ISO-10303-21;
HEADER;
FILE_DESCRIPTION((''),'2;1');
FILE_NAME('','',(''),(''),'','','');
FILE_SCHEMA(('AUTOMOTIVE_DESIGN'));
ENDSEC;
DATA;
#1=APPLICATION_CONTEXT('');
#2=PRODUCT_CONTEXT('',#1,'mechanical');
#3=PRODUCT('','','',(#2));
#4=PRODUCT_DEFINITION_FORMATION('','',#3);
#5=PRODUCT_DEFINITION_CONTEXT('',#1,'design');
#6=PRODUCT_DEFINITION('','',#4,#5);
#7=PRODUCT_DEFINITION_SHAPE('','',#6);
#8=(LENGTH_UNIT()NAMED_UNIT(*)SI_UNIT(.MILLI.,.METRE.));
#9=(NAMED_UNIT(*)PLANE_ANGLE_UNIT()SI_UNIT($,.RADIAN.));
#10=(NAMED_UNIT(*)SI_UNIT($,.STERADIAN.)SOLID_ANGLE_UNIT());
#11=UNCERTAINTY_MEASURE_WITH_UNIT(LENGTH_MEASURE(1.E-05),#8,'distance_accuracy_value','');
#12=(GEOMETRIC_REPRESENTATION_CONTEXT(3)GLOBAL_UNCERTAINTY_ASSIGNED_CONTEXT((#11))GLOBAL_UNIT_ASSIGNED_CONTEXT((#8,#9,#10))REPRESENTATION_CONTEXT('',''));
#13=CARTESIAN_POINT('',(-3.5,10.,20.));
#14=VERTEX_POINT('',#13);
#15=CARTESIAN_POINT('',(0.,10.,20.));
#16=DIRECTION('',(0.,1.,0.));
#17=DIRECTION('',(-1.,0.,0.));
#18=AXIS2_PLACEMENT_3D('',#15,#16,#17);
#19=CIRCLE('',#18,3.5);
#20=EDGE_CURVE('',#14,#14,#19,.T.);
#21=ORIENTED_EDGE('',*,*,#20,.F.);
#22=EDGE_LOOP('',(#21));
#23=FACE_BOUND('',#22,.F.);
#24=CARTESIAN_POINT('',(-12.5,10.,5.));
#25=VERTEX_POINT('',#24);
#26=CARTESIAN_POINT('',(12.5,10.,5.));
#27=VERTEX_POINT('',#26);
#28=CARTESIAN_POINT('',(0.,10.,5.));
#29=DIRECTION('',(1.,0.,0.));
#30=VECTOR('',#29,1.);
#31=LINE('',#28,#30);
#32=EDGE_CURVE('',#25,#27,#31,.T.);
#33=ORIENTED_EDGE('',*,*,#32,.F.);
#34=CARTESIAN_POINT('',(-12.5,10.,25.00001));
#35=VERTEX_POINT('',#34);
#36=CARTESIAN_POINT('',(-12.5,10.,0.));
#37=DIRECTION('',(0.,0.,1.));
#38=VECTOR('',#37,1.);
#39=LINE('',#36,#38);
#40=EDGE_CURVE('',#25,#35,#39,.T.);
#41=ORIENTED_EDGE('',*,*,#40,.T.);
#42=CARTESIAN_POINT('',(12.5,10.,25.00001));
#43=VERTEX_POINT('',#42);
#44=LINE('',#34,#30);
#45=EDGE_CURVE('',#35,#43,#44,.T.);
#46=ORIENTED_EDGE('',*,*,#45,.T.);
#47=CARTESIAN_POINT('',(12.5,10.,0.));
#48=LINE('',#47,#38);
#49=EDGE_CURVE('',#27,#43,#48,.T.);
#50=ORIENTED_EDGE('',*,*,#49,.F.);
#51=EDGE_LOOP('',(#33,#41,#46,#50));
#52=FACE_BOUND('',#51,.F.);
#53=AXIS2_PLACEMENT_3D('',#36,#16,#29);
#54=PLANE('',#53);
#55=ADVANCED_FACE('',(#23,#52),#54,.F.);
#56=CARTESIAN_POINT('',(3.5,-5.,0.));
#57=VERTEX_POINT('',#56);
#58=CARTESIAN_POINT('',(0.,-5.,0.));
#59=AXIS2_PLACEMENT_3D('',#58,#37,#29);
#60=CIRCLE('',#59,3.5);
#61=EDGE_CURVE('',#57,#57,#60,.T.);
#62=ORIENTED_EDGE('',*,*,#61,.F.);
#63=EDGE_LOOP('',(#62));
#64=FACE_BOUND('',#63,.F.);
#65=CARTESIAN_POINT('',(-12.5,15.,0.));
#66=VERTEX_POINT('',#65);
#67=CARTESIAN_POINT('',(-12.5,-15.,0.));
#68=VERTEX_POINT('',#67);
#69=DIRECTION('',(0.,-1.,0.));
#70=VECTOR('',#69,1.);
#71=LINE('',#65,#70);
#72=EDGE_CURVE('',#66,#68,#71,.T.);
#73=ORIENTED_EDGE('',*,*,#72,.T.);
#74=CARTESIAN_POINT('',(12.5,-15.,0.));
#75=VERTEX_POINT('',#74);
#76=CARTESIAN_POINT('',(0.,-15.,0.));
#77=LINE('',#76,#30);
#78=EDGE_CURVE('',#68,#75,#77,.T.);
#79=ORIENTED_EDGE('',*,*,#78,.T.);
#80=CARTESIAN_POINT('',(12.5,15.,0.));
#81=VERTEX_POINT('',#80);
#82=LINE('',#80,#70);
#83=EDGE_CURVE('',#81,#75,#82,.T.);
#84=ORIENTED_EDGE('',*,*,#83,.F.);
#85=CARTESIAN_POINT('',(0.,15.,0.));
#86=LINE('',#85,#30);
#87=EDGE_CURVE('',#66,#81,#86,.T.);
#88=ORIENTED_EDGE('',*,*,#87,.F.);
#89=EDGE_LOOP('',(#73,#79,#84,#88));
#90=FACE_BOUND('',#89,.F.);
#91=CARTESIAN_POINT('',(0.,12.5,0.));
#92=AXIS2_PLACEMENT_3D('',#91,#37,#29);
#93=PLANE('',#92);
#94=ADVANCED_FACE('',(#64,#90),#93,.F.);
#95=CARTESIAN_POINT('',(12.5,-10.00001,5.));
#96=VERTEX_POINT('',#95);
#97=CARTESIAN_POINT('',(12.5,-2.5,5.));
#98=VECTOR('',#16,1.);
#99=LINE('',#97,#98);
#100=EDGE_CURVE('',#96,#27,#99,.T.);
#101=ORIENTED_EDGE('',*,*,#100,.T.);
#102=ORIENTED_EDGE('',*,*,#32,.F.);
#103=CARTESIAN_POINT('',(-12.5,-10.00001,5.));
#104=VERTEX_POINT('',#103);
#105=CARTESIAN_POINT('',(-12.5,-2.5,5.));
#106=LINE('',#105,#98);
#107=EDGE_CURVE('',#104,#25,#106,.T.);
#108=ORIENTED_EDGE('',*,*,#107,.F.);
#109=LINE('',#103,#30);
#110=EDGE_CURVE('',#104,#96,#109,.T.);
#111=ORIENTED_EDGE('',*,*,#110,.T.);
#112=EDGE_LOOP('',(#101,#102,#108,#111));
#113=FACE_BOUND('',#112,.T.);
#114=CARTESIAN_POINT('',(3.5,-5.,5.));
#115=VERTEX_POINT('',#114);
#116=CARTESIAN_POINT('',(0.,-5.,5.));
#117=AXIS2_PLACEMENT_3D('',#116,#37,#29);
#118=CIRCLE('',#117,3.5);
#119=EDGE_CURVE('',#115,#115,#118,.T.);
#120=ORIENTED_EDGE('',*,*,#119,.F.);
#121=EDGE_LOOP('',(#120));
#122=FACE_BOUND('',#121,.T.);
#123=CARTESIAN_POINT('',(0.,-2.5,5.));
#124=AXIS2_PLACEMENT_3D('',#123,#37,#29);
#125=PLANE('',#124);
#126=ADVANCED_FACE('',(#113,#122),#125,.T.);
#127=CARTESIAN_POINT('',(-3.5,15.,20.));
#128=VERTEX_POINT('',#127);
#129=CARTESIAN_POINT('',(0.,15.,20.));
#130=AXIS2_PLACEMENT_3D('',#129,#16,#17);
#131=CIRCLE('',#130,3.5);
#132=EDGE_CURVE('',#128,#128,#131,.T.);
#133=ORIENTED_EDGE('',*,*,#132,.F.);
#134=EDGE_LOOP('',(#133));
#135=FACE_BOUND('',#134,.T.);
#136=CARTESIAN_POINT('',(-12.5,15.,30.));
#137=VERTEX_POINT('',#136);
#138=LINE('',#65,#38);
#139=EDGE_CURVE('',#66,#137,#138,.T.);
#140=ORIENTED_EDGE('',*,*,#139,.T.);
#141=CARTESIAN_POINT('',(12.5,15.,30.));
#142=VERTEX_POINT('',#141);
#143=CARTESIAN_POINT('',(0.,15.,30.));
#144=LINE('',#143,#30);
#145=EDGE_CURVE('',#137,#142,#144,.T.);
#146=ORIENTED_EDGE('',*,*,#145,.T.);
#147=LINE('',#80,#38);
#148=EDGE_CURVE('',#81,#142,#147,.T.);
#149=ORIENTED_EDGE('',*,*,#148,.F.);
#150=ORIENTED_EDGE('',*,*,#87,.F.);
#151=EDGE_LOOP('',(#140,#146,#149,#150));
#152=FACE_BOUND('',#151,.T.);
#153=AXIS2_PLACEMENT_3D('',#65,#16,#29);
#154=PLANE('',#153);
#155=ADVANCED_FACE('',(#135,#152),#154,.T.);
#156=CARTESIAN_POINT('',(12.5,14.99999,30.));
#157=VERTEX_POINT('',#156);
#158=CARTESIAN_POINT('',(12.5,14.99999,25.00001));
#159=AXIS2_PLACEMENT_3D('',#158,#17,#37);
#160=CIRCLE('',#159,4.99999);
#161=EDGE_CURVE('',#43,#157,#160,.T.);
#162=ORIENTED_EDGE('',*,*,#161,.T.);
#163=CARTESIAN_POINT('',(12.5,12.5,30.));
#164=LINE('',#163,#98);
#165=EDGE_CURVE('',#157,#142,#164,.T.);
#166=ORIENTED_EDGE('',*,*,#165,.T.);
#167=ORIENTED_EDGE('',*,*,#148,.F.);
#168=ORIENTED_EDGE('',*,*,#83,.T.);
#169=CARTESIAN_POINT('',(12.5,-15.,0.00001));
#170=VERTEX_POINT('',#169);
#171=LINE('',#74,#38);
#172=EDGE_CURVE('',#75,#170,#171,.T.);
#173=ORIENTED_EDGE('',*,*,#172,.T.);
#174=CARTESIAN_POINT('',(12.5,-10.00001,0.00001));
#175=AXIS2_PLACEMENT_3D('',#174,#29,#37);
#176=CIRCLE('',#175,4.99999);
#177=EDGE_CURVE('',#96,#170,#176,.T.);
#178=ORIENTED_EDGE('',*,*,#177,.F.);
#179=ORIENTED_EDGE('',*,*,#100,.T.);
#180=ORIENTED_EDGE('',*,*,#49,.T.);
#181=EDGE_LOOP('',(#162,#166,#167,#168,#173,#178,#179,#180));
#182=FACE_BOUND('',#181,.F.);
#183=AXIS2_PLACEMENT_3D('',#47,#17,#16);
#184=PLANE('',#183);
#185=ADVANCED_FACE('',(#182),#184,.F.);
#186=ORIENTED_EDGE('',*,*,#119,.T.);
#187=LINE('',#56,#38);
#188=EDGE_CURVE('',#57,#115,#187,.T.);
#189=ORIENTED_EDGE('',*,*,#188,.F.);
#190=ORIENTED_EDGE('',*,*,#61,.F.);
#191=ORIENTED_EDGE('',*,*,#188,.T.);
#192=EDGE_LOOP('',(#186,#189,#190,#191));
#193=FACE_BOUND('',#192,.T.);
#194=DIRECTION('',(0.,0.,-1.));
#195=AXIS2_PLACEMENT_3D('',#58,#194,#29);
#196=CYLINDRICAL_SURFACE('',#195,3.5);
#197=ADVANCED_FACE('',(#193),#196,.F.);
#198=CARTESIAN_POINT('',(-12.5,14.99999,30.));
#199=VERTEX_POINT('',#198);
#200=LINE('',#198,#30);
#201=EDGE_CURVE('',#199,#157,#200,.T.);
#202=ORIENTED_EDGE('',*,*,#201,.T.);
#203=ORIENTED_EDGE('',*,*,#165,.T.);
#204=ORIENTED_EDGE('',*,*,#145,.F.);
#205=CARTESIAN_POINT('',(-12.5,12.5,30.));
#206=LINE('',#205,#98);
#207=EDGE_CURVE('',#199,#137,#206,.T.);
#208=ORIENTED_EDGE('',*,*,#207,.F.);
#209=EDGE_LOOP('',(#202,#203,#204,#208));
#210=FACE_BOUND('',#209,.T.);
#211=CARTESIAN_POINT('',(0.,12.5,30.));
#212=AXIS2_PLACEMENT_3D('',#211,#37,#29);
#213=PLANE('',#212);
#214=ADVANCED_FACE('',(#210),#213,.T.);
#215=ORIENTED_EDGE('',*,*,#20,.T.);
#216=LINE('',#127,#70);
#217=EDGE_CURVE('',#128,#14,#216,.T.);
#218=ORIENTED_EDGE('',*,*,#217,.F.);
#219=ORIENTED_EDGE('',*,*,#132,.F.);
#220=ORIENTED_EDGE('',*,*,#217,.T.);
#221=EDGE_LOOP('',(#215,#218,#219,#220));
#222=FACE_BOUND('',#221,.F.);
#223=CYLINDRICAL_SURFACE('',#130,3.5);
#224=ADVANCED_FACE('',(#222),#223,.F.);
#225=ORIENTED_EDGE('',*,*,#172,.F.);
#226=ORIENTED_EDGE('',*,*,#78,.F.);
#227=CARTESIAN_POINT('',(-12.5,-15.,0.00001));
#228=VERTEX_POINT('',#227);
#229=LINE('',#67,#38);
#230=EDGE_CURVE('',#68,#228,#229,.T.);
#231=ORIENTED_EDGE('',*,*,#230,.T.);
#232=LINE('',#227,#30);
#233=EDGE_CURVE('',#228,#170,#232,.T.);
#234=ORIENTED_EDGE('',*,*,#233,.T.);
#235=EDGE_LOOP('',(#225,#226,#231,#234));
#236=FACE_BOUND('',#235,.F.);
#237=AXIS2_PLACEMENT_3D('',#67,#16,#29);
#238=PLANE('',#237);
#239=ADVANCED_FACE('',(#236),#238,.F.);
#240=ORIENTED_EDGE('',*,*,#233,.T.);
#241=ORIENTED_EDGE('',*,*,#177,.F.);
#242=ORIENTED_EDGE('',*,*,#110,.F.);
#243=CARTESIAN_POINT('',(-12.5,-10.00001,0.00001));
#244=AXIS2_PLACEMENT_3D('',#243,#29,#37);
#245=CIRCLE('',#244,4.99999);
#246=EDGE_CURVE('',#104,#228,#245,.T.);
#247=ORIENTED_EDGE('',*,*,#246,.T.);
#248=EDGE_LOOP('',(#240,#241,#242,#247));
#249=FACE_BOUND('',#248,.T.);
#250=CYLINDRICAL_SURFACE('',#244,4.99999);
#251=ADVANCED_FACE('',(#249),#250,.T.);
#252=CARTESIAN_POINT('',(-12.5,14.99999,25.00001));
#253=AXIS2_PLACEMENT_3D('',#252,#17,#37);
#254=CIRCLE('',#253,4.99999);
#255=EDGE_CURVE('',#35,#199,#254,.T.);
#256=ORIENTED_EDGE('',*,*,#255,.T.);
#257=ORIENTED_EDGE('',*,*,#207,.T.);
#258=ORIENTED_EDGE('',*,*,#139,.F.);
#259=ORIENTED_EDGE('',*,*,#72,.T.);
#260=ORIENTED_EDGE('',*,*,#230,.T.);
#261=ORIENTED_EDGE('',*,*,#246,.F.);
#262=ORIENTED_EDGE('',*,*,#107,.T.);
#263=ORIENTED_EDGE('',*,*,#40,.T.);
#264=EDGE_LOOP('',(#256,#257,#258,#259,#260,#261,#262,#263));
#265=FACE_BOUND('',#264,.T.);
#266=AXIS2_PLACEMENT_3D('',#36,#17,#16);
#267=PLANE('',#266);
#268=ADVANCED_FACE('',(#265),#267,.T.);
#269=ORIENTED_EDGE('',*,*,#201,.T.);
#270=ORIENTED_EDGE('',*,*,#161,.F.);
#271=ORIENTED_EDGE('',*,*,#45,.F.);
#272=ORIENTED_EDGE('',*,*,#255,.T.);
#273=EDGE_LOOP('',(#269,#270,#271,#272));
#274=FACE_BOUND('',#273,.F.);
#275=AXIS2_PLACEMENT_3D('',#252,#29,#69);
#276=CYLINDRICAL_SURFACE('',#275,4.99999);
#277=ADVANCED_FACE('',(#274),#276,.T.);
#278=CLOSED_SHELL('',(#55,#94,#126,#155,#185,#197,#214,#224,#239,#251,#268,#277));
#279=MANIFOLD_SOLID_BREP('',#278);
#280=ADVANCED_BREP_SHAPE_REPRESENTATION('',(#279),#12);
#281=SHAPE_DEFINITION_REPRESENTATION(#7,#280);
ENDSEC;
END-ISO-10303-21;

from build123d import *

# Parameters (mm, degrees)
F0_W     = 25
F0_H     = 25
F0_R     = 3.5
F1_DEPTH = 5
F0_H_2   = 5
F2_DEPTH = 30
F3_R     = 3.5
F4_DEPTH = 5
F5_R     = 4.99999
F6_R     = 4.99999


# Not quite as in the source:
# - a fillet or chamfer is up to 0.001 mm smaller than in the source, because OpenCascade refuses the exact size


with BuildPart() as f1:
    # F0 (on Top) → F1 (new body)
    with BuildSketch(Plane.XY):
        with Locations((0, -2.5)):
            Rectangle(F0_W, F0_H)
        with Locations((0, -5)):
            Circle(F0_R, mode=Mode.SUBTRACT)
    extrude(amount=F1_DEPTH)

    # F0 (on Top) → F2 (join)
    with BuildSketch(Plane.XY):
        with Locations((0, 12.5)):
            Rectangle(F0_W, F0_H_2)
    extrude(amount=F2_DEPTH)

    # F3 (on face) → F4 (cut)
    with BuildSketch(Plane(origin=(0, 15, 0), x_dir=(-1, 0, 0), z_dir=(0, 1, 0))):
        with Locations((0, 20)):
            Circle(F3_R)
    extrude(amount=-F4_DEPTH, mode=Mode.SUBTRACT)

    # F5 (radius 5 in the source; OpenCascade refuses exactly that, so slightly less here)
    f5_edges = [f1.edges().sort_by_distance(p)[0] for p in [
        (0, 10, 30),
    ]]
    fillet(f5_edges, radius=F5_R)

    # F6 (radius 5 in the source; OpenCascade refuses exactly that, so slightly less here)
    f6_edges = [f1.edges().sort_by_distance(p)[0] for p in [
        (0, -15, 5),
    ]]
    fillet(f6_edges, radius=F6_R)


solid = f1.part
